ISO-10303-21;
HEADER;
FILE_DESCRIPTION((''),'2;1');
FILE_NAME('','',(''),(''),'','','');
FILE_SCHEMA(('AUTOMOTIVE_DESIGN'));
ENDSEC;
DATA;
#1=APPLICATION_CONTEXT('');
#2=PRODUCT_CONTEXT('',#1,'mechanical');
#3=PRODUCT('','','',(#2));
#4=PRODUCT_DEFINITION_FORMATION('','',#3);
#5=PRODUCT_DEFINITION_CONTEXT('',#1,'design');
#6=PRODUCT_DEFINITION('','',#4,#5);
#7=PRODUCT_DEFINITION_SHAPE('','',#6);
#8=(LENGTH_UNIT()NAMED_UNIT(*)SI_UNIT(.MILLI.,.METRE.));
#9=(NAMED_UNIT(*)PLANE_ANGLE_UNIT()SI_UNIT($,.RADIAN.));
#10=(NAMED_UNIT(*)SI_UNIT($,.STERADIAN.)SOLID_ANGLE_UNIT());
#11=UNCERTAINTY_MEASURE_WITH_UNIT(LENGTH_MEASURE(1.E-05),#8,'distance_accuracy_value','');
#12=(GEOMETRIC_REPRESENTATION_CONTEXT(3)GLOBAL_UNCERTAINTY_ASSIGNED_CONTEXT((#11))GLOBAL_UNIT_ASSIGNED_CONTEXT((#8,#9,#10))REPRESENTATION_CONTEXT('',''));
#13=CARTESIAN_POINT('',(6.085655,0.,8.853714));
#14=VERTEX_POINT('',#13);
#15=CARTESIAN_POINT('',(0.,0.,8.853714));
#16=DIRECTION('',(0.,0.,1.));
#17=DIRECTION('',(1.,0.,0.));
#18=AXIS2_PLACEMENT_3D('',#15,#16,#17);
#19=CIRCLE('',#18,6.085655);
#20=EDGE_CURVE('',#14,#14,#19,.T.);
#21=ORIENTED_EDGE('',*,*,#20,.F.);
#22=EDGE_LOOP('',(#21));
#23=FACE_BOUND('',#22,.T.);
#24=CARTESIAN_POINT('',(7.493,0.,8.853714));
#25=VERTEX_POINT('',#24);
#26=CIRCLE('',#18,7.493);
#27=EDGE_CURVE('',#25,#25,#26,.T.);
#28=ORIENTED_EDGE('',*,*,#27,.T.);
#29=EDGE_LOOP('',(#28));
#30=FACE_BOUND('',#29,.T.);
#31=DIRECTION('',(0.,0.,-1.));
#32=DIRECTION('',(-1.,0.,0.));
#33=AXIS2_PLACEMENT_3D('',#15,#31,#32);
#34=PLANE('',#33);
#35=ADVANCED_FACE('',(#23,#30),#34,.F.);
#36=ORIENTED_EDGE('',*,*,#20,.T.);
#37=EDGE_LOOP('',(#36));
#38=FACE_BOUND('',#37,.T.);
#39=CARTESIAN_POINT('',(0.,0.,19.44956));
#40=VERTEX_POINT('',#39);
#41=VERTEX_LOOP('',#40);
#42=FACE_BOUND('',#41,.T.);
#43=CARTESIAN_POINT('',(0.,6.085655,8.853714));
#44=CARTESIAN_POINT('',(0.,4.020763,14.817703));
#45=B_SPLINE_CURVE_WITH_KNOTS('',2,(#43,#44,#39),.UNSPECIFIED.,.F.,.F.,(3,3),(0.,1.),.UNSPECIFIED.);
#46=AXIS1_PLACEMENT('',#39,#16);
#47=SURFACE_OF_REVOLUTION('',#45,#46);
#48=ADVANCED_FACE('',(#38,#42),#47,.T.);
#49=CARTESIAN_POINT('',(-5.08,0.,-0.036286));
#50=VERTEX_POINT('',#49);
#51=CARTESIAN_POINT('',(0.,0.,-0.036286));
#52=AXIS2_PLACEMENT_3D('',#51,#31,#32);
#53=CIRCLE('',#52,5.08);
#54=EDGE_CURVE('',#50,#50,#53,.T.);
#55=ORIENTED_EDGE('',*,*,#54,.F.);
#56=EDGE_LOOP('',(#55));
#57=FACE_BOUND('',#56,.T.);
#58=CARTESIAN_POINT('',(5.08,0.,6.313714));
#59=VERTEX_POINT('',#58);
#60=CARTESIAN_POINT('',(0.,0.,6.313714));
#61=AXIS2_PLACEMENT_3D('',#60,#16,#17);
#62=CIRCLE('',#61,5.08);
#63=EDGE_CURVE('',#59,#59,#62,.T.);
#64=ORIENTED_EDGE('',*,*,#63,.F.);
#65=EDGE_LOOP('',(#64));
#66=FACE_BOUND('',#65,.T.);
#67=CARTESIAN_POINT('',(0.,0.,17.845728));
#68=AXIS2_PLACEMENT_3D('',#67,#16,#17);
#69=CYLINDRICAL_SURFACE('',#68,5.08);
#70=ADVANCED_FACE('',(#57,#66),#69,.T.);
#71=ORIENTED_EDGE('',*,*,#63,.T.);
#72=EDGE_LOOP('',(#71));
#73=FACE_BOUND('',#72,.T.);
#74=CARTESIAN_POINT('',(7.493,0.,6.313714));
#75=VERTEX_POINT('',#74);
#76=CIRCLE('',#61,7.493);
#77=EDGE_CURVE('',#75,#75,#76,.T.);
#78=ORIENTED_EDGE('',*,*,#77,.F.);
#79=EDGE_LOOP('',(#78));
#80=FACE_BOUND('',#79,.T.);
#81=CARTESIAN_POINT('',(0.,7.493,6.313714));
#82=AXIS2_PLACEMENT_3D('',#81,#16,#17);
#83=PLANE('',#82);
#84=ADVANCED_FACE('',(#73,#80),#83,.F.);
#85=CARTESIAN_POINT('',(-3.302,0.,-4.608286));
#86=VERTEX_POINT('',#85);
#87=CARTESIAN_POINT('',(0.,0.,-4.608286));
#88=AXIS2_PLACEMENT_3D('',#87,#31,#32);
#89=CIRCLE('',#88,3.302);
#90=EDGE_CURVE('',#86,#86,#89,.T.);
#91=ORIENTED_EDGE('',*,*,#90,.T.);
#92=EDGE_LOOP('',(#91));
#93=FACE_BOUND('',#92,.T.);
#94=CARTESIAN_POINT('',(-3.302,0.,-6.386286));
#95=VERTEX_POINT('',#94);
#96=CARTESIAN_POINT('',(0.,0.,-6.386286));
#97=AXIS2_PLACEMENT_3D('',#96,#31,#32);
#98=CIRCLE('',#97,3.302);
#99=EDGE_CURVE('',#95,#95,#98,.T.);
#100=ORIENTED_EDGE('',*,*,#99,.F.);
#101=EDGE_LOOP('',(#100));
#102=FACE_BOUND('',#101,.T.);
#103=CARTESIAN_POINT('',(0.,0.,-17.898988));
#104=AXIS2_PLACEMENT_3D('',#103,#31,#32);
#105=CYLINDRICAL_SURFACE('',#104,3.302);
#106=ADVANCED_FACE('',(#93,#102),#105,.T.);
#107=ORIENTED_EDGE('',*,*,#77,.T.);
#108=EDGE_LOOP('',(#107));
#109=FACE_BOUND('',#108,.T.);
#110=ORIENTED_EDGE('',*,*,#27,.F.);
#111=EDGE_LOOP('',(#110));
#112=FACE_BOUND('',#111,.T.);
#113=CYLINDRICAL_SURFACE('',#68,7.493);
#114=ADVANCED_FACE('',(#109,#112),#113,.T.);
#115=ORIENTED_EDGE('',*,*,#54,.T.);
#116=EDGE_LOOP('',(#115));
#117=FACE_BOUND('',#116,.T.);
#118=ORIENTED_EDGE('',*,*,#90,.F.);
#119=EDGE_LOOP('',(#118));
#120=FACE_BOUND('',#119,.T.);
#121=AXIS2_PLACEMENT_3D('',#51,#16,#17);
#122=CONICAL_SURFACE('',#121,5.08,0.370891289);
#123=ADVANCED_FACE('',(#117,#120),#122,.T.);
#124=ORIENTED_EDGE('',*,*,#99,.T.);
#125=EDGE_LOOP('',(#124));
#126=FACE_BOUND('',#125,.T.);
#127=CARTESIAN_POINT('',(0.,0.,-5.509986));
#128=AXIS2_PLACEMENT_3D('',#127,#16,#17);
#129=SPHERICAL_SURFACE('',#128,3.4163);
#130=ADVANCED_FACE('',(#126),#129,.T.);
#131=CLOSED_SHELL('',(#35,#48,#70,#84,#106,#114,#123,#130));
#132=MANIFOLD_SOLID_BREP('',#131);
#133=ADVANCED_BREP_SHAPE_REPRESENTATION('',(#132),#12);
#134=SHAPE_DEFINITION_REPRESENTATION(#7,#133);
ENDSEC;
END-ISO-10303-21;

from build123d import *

# Parameters (mm, degrees)
DOME1_FACE_RADIUS = 3.302
DOME1_HEIGHT      = 2.54


# Read off the part's stored shape, not the designer's step: Cut-Revolve-Thin7
with BuildPart() as part:
    # Sketch2 → Revolve1 (revolve)
    with BuildSketch(Plane(origin=(0, 0, 0), x_dir=(0, 0, -1), z_dir=(1, 0, 0)), mode=Mode.PRIVATE) as revolve1_sk:
        Polygon((-8.853714286, 0), (-8.853714286, 7.493), (-6.313714286, 7.493), (-6.313714286, 5.08), (6.386285714, 5.08), (6.386285714, 0), align=None)
    revolve(revolve1_sk.sketch.rotate(Axis((0, 0, 17.845728077), (0, 0, -1)), 90), axis=Axis((0, 0, 17.845728077), (0, 0, -1)))

    # Sketch3 → Revolve2 (revolve)
    with BuildSketch(Plane(origin=(0, 0, 0), x_dir=(0, 0, -1), z_dir=(1, 0, 0))):
        with BuildLine():
            Line((-19.449560173, 0), (-8.853714286, 0))
            Line((-8.853714286, 0), (-8.853714286, 6.085655059))
            add(Edge.make_bspline(
                [(-8.853714286, 6.085655059), (-14.817702659, 4.020762633), (-19.449560173, 0)],
                knots=[0, 0, 0, 1, 1, 1], degree=2))
        make_face()
    revolve(axis=Axis((0, 0, 19.449560173), (0, 0, -1)))

    # Cut-Revolve-Thin7 outline → Cut-Revolve-Thin7 (revolve, cut)
    with BuildSketch(Plane.XZ):
        Polygon((5.08, -0.036285714), (3.302, -4.608285714), (3.302, -6.386285714), (5.08, -6.386285714), align=None)
    revolve(axis=Axis((0, 0, 0), (0, 0, 1)), mode=Mode.SUBTRACT)

    # Dome1: a dome of height H over a round flat face of radius A is a cap of a sphere of radius (A * A + H * H) / (2 * H)
    dome1_r = (DOME1_FACE_RADIUS * DOME1_FACE_RADIUS + DOME1_HEIGHT * DOME1_HEIGHT) / (2 * DOME1_HEIGHT)
    dome1_base = Plane((0, 0, -6.386285714), z_dir=(0, 0, -1))
    with Locations(dome1_base.offset(DOME1_HEIGHT - dome1_r)):
        dome1_ball = Sphere(dome1_r, mode=Mode.PRIVATE)
    add(split(dome1_ball, bisect_by=dome1_base, keep=Keep.TOP, mode=Mode.PRIVATE))


solid = part.part
